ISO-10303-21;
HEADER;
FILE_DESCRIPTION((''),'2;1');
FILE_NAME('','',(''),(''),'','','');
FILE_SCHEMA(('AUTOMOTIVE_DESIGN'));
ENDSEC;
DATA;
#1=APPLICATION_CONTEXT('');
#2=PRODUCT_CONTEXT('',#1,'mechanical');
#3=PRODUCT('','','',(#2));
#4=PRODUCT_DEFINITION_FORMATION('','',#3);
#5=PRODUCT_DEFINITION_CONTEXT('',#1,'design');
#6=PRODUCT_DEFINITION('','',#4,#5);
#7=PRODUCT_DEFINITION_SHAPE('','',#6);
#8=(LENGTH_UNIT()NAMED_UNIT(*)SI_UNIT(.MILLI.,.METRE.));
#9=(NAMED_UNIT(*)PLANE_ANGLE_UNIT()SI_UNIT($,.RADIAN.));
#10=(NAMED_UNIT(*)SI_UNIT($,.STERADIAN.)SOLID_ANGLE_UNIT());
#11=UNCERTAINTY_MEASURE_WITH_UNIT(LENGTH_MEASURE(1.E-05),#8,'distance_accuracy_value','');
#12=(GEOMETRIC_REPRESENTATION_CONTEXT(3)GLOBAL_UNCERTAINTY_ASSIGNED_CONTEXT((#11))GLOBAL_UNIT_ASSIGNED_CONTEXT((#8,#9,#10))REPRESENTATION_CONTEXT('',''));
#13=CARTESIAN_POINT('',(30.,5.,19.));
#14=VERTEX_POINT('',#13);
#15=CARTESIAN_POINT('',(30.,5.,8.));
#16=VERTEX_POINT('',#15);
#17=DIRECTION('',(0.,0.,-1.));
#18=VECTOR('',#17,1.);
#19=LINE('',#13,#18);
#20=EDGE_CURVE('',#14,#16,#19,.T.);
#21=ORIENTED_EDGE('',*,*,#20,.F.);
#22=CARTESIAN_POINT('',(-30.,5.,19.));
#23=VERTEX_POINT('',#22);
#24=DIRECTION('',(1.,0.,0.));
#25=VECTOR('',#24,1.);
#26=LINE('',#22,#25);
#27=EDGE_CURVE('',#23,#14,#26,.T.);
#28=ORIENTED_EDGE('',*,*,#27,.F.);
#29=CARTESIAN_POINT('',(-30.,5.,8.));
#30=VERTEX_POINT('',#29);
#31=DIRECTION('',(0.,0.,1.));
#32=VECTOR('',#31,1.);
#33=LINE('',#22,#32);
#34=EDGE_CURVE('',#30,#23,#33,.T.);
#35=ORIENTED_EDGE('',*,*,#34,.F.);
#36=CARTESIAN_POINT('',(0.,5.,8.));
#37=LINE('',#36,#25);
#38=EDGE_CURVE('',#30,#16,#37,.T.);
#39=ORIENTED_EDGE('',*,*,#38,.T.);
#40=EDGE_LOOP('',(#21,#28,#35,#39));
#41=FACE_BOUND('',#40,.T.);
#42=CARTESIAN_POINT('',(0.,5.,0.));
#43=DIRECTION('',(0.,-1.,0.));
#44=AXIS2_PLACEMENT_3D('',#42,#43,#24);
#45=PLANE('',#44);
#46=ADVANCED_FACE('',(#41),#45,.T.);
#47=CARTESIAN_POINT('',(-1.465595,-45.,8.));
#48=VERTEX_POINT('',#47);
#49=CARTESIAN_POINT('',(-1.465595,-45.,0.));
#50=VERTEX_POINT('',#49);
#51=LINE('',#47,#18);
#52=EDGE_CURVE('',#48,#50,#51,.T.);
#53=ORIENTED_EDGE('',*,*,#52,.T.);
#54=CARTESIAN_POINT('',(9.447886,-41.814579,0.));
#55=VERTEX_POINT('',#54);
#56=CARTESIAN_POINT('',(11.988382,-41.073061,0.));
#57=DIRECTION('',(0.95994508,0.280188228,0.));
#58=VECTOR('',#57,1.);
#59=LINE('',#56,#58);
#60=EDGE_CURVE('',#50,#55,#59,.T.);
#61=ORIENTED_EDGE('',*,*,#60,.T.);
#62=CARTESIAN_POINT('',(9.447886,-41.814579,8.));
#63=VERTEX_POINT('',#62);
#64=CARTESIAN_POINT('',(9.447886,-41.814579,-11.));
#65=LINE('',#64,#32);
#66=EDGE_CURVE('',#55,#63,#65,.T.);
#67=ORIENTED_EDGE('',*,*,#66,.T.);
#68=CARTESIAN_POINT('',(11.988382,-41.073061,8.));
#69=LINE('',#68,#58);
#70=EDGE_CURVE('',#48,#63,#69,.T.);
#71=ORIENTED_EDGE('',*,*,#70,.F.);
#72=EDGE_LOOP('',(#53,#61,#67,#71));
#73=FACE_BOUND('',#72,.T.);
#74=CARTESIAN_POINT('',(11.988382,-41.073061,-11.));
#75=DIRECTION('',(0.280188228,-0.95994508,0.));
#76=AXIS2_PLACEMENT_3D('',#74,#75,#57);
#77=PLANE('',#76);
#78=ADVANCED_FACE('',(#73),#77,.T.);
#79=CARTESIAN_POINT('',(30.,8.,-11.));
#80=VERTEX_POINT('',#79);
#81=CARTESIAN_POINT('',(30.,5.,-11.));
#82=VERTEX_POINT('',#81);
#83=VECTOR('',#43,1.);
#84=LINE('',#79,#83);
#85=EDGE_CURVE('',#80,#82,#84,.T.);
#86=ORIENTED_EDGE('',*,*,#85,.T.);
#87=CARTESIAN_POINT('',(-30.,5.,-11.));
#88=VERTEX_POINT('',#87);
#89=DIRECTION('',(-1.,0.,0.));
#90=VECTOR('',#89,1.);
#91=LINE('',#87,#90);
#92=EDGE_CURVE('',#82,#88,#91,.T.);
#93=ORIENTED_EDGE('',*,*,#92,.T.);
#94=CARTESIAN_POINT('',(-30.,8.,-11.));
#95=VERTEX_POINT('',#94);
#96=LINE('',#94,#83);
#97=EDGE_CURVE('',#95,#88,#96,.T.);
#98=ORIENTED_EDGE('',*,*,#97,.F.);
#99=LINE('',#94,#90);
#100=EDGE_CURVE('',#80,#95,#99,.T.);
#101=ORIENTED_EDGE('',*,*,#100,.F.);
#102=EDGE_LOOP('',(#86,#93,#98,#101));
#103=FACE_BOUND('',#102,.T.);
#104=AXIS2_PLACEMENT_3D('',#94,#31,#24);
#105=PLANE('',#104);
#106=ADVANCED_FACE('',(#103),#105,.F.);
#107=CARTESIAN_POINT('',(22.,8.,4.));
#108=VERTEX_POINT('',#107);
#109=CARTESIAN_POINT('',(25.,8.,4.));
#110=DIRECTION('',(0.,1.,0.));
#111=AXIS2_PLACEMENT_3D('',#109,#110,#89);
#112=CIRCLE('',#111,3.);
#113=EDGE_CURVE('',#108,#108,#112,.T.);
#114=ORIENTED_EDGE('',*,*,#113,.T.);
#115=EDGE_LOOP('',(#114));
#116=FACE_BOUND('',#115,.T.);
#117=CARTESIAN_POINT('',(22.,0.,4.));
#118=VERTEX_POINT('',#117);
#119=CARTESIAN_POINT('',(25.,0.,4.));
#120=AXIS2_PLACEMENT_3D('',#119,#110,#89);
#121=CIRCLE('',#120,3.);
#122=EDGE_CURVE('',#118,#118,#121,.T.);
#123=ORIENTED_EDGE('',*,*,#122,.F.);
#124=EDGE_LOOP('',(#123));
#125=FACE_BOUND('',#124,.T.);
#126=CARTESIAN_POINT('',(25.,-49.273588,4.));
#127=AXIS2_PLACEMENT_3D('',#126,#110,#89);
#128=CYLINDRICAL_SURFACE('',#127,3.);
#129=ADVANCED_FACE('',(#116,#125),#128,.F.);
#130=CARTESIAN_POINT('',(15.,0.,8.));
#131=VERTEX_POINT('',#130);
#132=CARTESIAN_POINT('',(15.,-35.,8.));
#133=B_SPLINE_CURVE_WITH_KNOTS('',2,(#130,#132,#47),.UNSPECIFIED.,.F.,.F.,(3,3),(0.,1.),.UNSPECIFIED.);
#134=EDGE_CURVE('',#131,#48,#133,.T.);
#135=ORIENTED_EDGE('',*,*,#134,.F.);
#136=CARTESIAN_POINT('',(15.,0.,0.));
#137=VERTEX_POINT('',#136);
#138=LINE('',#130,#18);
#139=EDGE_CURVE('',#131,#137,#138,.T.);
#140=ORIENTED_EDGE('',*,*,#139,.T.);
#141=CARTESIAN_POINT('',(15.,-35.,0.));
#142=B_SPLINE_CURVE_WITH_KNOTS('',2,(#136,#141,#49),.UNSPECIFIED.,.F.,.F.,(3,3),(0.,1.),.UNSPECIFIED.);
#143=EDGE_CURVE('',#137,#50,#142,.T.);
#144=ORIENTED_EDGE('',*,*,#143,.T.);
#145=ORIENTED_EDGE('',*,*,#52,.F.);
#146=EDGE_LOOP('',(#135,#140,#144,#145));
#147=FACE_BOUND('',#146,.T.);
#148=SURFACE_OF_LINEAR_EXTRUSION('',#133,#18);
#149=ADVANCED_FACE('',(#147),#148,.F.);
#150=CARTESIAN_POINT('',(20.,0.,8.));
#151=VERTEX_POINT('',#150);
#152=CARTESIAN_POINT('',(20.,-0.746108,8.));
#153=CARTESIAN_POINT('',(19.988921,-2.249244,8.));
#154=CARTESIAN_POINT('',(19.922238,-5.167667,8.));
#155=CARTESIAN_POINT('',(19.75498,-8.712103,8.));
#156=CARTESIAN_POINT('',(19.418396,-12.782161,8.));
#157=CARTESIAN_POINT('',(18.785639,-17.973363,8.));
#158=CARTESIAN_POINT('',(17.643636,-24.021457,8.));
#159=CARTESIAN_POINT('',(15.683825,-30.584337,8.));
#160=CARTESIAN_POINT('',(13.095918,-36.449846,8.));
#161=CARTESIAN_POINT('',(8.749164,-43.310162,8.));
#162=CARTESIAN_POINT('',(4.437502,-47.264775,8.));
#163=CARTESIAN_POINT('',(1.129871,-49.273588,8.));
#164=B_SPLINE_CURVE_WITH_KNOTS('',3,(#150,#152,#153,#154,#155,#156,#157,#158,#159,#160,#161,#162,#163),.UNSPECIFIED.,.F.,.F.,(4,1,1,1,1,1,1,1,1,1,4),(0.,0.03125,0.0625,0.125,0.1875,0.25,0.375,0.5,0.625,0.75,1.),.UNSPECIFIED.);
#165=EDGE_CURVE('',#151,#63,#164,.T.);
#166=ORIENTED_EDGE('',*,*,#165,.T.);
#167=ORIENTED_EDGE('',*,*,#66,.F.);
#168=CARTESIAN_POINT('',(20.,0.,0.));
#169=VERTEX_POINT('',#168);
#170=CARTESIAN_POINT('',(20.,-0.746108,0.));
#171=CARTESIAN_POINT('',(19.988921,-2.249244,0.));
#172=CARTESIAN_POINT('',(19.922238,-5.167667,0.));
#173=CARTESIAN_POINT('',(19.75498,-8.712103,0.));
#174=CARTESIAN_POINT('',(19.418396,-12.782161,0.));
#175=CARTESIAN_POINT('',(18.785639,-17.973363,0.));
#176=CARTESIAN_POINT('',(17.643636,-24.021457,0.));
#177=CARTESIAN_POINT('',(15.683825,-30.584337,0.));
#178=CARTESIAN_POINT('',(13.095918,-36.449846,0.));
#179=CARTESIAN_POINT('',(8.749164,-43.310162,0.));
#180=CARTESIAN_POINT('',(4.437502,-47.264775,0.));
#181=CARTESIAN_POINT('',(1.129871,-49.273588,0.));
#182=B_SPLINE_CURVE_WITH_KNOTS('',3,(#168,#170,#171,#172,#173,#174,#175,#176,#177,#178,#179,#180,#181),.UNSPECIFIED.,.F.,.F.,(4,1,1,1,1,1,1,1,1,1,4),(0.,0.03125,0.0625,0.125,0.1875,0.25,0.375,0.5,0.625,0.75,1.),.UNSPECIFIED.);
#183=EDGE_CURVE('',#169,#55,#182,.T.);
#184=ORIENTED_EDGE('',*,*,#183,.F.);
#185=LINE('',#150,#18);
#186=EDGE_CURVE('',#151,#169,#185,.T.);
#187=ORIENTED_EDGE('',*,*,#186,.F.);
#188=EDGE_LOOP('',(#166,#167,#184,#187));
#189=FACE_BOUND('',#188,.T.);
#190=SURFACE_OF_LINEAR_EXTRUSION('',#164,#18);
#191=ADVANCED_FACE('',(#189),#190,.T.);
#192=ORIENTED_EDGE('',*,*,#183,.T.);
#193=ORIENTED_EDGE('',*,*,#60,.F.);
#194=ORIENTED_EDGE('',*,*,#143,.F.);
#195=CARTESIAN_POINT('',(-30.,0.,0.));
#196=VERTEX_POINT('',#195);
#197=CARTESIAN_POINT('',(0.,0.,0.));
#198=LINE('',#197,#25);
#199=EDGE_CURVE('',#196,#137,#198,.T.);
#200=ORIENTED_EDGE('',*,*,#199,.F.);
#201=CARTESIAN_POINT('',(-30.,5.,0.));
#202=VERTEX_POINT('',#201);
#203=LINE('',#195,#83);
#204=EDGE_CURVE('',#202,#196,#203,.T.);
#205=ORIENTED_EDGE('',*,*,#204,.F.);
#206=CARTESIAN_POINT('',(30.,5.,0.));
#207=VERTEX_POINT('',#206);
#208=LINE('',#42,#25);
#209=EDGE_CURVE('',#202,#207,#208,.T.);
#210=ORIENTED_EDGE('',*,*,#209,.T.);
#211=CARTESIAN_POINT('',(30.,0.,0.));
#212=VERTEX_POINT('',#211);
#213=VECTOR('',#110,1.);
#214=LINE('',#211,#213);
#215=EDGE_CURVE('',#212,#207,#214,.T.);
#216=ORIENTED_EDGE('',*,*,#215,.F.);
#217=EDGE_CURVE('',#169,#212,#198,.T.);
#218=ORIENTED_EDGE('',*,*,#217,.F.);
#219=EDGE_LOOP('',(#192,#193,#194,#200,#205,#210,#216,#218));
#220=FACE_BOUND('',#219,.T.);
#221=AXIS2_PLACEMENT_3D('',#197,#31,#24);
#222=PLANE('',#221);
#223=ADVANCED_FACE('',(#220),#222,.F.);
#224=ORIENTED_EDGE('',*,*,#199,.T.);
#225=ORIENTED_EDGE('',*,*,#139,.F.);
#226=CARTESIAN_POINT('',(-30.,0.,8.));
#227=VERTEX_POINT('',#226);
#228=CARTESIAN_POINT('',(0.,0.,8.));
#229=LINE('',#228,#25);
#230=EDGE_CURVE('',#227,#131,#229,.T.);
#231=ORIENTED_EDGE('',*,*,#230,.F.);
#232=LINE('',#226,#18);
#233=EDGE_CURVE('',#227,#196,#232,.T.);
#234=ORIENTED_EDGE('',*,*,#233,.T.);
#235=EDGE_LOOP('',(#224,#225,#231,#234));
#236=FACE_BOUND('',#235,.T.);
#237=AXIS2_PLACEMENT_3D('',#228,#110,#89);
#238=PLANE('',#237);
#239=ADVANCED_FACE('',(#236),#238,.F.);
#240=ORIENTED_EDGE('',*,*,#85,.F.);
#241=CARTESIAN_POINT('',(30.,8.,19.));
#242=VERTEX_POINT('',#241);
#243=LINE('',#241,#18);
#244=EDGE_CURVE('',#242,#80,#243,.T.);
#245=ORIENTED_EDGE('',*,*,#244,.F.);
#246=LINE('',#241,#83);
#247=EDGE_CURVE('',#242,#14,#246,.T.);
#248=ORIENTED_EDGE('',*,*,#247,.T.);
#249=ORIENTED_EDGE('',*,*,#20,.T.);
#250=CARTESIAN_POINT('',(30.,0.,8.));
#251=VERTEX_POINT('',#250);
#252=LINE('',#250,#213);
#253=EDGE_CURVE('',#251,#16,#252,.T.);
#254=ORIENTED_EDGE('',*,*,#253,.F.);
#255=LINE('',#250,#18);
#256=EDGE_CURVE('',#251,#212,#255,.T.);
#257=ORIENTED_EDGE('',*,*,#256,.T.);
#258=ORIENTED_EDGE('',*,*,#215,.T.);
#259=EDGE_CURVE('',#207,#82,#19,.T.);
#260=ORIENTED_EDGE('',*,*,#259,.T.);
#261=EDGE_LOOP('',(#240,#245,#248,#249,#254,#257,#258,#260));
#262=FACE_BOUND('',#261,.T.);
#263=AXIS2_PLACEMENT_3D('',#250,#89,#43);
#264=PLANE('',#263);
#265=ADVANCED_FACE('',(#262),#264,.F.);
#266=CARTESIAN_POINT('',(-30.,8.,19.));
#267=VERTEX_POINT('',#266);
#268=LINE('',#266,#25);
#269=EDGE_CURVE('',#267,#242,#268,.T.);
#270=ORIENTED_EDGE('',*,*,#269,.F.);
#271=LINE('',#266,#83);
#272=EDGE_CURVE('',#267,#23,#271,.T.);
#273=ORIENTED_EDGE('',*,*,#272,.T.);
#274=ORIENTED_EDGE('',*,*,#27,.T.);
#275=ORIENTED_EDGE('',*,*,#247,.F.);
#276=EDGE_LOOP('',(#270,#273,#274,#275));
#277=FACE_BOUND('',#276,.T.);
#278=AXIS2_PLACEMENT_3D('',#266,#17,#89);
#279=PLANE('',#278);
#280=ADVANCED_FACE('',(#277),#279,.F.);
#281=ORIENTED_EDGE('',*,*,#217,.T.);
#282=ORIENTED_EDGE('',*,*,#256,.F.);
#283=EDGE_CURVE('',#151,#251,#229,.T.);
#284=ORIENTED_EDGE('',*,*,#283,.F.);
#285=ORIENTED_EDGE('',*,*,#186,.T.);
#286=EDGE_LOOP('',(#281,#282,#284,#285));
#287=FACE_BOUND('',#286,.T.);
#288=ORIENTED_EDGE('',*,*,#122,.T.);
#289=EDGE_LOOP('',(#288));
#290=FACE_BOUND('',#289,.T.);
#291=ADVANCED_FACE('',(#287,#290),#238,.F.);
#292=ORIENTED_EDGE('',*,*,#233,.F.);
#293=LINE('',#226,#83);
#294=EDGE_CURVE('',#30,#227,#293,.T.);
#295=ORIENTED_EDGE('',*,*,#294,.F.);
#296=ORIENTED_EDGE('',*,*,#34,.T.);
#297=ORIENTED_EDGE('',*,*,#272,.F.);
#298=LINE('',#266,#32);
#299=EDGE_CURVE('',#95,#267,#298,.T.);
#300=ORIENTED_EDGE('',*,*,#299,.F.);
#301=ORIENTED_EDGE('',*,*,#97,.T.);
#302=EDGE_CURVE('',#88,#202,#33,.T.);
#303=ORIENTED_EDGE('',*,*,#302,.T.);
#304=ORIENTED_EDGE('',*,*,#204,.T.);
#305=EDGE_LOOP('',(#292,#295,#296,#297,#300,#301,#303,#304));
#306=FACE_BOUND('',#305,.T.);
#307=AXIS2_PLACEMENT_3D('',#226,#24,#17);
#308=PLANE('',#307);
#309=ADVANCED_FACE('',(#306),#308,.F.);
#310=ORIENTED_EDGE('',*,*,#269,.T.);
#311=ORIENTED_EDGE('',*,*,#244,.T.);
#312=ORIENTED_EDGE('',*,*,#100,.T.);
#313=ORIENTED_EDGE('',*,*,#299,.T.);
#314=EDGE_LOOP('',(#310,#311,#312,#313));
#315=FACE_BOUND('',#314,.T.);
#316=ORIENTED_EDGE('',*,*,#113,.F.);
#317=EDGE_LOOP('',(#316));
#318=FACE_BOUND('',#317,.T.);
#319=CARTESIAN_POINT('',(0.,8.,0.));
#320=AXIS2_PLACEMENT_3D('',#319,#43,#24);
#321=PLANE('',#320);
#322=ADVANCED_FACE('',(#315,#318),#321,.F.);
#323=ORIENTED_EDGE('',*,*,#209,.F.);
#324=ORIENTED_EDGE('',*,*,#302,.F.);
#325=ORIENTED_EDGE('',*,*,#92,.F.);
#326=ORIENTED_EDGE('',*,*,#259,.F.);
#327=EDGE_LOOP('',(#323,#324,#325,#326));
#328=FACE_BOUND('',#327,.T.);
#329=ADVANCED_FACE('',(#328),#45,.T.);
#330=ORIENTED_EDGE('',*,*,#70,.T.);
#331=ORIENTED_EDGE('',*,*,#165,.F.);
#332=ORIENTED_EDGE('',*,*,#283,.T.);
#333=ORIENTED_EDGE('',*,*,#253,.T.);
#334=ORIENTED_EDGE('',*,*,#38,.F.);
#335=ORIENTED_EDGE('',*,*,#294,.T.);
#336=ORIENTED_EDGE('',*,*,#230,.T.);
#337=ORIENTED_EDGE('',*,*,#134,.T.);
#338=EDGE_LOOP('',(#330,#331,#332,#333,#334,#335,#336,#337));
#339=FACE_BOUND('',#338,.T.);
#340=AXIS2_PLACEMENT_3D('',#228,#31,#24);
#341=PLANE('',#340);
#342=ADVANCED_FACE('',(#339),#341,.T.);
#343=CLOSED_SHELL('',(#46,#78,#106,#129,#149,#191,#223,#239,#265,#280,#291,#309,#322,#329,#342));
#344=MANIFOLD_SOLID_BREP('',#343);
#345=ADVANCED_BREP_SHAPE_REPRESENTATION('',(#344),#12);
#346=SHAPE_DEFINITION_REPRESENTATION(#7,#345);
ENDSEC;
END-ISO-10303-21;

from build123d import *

# Parameters (mm, degrees)
BOSS_EXTRUDE1_DEPTH = 8
SKETCH4_W           = 60
SKETCH4_H           = 30
BOSS_EXTRUDE2_DEPTH = 3
SKETCH5_R           = 3
CUT_EXTRUDE1_DEPTH  = 68.388900825
CUT_EXTRUDE3_DEPTH  = 61.736204501


# Read off the part's stored shape, not the designer's step: Boss-Extrude1
with BuildPart() as part:
    # Boss-Extrude1 outline → Boss-Extrude1 (new body)
    with BuildSketch(Plane.XY):
        with BuildLine():
            Line((-30, 0), (15, 0))
            add(Edge.make_bspline(
                [(15, 0), (15, -35), (-1.465594932, -45)],
                knots=[0, 0, 0, 1, 1, 1], degree=2))
            Line((-1.465594932, -45), (1.12987064, -49.273588476))
            add(Edge.make_bspline(
                [(20, 0), (20, -0.746108231), (19.988920633, -2.249243802), (19.922237871, -5.16766696), (19.754979798, -8.712103145), (19.418395555, -12.782160754), (18.785639236, -17.973362747), (17.643635897, -24.021456658), (15.683824621, -30.584336804), (13.095918314, -36.449845939), (8.74916419, -43.310162254), (4.437502248, -47.26477457), (1.12987064, -49.273588476)],
                knots=[0, 0, 0, 0, 0.03125, 0.0625, 0.125, 0.1875, 0.25, 0.375, 0.5, 0.625, 0.75, 1, 1, 1, 1], degree=3))
            Line((20, 0), (30, 0))
            Line((30, 0), (30, 5))
            Line((30, 5), (-30, 5))
            Line((-30, 5), (-30, 0))
        make_face()
    extrude(amount=BOSS_EXTRUDE1_DEPTH)

    # Sketch4 → Boss-Extrude2 (add)
    with BuildSketch(Plane(origin=(0, 5, 0), x_dir=(1, 0, 0), z_dir=(0, 1, 0))):
        with Locations((0, -4)):
            Rectangle(SKETCH4_W, SKETCH4_H)
    extrude(amount=BOSS_EXTRUDE2_DEPTH)

    # Sketch5 → Cut-Extrude1 (cut, through all)
    with BuildSketch(Plane(origin=(0, 8, 0), x_dir=(1, 0, 0), z_dir=(0, 1, 0))):
        with Locations(Location((25, -4, 0), (0, 0, 180))):
            Circle(SKETCH5_R)
    extrude(amount=-CUT_EXTRUDE1_DEPTH, mode=Mode.SUBTRACT)

    # Sketch7 → Cut-Extrude3 (cut, through all)
    with BuildSketch(Plane.XY.offset(8)):
        Polygon((-1.465594932, -45), (9.447885747, -41.814579425), (11.582932476, -49.129403534), (0.669451797, -52.314824109), align=None)
    extrude(amount=-CUT_EXTRUDE3_DEPTH, mode=Mode.SUBTRACT)


solid = part.part
